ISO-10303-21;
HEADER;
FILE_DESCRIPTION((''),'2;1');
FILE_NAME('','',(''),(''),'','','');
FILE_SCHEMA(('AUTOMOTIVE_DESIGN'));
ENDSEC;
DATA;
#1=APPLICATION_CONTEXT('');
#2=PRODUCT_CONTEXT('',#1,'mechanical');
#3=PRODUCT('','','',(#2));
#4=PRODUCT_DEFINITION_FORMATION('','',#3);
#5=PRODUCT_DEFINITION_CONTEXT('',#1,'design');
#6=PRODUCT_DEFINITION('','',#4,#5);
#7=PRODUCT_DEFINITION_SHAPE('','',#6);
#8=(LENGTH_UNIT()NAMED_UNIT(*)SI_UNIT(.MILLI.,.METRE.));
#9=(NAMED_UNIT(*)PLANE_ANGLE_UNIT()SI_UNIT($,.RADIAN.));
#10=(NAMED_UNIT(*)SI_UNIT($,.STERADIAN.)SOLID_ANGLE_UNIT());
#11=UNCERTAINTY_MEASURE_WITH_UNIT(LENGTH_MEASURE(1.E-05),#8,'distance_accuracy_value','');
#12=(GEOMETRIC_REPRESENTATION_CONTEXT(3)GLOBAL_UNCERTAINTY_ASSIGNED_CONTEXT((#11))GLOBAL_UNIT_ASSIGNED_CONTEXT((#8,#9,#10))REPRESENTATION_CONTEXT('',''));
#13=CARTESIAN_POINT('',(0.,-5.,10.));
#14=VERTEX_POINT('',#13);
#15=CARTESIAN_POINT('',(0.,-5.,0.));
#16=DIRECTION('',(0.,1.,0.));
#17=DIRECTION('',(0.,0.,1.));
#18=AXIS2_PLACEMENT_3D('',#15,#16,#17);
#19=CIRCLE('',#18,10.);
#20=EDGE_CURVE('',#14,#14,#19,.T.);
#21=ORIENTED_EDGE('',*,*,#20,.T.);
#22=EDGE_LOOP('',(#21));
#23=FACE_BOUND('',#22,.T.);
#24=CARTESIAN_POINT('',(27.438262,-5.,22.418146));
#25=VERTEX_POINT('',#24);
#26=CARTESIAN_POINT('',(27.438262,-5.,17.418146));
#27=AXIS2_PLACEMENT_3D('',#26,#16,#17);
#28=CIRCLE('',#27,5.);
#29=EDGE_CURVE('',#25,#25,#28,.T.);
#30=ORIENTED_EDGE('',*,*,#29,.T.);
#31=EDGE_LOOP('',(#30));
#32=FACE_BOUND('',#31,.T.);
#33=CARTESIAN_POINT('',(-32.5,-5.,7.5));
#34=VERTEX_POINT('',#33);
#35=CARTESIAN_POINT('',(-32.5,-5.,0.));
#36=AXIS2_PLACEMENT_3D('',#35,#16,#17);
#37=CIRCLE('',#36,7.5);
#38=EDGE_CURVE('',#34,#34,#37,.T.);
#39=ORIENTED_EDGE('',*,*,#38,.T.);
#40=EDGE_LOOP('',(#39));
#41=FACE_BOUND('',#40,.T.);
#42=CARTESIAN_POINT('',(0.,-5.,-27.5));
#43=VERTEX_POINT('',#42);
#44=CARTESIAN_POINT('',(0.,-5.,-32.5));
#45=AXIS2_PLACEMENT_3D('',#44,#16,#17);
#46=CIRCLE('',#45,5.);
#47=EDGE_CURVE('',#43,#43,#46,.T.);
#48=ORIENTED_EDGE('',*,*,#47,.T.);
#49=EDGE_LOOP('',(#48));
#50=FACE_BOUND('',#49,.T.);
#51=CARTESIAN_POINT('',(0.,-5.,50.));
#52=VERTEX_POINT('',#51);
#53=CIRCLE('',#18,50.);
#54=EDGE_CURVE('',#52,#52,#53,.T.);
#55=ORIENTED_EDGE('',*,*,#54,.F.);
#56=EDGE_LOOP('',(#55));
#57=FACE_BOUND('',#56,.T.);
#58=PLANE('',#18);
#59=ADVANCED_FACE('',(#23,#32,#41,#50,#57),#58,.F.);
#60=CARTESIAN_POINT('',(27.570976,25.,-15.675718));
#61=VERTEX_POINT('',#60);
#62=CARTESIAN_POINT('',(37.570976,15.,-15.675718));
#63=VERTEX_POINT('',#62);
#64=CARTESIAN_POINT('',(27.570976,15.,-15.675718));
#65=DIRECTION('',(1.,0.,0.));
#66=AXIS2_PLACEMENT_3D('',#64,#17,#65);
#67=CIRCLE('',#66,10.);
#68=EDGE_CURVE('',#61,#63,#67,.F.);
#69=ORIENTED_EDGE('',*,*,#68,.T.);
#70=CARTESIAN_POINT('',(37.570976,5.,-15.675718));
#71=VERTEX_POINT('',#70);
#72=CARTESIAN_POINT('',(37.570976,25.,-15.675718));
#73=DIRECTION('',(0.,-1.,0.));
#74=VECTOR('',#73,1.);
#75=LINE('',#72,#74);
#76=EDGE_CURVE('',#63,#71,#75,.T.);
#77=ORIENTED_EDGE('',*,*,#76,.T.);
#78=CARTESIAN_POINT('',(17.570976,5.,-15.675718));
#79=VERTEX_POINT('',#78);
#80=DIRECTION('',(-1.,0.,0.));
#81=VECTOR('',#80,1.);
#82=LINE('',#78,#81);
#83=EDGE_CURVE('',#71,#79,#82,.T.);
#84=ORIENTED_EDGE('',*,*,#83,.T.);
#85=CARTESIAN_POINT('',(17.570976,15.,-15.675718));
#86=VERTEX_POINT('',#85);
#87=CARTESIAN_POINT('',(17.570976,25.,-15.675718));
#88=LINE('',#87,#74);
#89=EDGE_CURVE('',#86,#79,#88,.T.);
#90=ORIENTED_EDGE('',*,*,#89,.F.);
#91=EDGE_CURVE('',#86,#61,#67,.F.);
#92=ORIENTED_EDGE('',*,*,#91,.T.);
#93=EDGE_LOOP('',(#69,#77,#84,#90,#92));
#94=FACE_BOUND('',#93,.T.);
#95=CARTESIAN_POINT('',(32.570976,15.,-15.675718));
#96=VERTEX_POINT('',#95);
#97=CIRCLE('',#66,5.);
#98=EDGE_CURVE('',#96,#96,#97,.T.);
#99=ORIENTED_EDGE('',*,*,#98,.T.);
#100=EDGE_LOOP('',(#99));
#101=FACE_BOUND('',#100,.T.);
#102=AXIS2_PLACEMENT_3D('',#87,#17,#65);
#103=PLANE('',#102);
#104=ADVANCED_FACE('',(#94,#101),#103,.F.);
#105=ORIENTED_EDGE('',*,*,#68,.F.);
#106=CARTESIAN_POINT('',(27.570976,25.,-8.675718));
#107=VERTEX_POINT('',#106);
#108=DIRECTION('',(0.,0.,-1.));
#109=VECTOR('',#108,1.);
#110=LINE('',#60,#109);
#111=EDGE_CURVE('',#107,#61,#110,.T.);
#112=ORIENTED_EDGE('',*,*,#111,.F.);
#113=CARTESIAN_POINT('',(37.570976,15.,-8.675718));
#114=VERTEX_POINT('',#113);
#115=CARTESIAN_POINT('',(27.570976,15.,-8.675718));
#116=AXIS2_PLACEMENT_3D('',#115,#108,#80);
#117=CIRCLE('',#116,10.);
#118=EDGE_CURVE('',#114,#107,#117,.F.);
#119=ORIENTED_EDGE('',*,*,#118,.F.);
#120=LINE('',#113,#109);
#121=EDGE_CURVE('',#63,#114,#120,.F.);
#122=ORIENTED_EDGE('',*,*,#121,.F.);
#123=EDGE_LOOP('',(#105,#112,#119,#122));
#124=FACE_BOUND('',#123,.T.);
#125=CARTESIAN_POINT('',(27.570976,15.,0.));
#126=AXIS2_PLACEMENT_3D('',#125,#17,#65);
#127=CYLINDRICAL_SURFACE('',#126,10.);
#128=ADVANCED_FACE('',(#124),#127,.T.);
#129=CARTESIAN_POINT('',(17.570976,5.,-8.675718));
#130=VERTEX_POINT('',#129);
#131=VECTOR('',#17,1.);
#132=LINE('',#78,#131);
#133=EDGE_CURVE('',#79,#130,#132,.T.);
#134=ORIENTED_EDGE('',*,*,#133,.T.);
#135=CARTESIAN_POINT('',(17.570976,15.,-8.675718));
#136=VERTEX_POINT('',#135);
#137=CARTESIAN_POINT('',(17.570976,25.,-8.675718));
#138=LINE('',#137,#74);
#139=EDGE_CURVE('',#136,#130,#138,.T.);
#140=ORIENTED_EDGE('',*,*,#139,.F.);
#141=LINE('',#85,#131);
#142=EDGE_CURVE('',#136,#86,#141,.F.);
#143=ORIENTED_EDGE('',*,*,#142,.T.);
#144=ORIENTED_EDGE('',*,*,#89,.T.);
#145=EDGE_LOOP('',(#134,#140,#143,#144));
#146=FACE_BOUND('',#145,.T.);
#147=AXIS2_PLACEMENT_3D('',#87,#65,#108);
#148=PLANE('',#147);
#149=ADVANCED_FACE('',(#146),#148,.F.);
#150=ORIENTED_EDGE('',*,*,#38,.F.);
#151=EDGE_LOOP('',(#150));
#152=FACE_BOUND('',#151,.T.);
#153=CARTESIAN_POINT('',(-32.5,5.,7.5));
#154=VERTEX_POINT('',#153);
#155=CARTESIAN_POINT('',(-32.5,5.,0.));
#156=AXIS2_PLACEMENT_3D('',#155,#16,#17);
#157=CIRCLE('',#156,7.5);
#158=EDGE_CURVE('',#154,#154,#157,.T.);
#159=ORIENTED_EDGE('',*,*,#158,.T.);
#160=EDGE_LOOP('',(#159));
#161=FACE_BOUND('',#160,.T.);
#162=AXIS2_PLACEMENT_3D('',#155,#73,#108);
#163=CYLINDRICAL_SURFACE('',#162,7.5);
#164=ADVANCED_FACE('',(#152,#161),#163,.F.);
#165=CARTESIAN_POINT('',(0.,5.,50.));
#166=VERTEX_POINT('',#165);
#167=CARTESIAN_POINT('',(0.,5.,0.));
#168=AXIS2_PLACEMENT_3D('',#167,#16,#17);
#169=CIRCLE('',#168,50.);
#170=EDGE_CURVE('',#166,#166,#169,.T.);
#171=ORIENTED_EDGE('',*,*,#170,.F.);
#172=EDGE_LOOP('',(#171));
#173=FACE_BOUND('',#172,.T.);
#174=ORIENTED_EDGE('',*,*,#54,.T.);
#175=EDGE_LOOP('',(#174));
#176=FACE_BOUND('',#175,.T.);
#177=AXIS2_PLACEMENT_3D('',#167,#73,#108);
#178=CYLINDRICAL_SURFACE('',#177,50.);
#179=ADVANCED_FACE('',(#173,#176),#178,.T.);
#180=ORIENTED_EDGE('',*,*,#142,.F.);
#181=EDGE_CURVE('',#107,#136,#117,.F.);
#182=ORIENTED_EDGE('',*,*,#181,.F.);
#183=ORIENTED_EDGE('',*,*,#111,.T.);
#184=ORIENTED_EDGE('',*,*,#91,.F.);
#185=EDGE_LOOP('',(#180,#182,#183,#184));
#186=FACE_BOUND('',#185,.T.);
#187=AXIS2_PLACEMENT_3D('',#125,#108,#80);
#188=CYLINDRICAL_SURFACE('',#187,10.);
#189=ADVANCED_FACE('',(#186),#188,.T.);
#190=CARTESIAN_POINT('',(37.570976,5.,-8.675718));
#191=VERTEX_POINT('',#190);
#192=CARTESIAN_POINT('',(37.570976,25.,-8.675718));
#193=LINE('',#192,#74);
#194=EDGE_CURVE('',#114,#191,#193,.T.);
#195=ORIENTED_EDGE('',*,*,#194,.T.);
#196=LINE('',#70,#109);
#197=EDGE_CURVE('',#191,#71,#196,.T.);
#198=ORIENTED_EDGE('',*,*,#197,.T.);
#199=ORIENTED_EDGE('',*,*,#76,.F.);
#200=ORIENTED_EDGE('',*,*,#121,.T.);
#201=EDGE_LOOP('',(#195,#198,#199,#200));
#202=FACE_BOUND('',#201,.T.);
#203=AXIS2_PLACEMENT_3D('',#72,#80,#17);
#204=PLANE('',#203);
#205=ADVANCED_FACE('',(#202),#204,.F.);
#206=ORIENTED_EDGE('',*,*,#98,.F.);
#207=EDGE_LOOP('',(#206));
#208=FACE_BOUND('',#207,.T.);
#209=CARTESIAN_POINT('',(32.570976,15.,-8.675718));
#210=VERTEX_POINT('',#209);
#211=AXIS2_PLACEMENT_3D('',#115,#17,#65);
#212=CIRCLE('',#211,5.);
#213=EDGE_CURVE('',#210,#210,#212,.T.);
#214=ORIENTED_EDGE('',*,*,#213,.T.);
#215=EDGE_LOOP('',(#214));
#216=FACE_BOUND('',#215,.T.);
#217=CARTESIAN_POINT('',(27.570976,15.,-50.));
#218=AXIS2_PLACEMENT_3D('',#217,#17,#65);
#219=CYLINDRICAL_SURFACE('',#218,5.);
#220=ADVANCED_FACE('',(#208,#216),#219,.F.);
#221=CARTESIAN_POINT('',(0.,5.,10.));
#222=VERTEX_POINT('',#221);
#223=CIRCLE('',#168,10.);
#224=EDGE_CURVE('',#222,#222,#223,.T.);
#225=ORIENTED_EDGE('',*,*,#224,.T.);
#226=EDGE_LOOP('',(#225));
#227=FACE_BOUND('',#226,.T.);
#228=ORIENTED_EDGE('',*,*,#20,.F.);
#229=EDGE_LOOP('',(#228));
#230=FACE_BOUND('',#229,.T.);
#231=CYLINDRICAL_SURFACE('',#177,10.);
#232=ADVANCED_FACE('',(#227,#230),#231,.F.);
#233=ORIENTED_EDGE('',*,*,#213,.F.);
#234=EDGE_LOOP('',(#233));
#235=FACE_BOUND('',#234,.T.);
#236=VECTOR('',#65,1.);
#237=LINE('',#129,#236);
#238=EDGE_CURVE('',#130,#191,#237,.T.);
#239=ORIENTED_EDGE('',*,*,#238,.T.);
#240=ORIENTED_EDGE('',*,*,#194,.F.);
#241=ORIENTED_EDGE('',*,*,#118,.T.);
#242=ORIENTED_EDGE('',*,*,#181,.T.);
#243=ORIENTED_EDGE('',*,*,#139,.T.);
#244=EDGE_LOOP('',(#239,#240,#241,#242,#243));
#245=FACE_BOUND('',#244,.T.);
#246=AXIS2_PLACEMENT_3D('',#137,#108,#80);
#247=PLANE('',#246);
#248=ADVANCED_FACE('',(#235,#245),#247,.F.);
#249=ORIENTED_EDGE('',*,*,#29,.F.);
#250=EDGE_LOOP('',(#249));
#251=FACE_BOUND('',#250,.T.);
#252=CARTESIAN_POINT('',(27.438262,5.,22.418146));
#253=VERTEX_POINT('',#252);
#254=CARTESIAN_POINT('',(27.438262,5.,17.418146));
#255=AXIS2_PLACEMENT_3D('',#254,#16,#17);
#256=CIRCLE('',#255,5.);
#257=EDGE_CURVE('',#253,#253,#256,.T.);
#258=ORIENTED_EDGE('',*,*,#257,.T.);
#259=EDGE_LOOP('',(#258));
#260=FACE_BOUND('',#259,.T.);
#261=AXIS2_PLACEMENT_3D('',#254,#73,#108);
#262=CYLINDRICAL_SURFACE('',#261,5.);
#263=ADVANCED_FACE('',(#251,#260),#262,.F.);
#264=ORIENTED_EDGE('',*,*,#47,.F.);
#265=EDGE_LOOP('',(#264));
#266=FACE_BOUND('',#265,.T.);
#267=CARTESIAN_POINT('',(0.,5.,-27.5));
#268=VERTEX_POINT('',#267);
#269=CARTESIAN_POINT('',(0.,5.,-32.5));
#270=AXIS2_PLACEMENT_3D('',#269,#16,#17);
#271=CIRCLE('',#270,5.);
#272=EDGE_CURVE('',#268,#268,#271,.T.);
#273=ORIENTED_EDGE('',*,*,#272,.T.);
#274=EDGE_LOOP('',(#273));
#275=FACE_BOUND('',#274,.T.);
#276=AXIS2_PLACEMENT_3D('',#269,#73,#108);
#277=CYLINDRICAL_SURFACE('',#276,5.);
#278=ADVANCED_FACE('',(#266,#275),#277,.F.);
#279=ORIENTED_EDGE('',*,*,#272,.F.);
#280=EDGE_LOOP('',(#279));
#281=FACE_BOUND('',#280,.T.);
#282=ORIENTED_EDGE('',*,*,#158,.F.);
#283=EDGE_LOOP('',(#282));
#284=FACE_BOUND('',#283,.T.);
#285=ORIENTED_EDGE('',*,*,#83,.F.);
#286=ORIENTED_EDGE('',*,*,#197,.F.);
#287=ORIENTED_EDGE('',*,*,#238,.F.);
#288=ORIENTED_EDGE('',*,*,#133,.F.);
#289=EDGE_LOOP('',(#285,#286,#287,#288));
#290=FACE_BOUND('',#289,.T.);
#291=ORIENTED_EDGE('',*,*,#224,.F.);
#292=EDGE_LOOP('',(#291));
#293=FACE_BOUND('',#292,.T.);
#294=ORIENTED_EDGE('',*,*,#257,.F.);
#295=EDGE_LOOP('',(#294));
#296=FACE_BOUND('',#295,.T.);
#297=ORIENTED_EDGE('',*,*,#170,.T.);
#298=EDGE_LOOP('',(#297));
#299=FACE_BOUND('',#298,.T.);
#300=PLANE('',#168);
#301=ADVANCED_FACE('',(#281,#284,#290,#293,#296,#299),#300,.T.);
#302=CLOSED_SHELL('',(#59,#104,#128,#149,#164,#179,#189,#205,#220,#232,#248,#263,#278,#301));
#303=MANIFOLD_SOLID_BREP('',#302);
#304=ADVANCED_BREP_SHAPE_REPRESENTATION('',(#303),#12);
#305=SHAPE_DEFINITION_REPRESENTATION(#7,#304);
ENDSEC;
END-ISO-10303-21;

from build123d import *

# Parameters (mm, degrees)
SKETCH1_R           = 50
SKETCH1_R_2         = 5
SKETCH1_R_3         = 7.5
SKETCH1_R_4         = 10
BOSS_EXTRUDE1_DEPTH = 5
SKETCH2_W           = 20
SKETCH2_H           = 7
BOSS_EXTRUDE2_DEPTH = 20
FILLET1_R           = 10
SKETCH3_R           = 5
CUT_EXTRUDE1_DEPTH  = 82.04221019


with BuildPart() as part:
    # Sketch1 → Boss-Extrude1 (new, symmetric)
    with BuildSketch(Plane(origin=(0, 0, 0), x_dir=(1, 0, 0), z_dir=(0, 1, 0))):
        with Locations(Location((0, 0, 0), (0, 0, 270))):
            Circle(SKETCH1_R)
        with Locations(Location((27.43826166, -17.418145627, 0), (0, 0, 270))):
            Circle(SKETCH1_R_2, mode=Mode.SUBTRACT)
        with Locations(Location((-32.5, 0, 0), (0, 0, 270))):
            Circle(SKETCH1_R_3, mode=Mode.SUBTRACT)
        with Locations(Location((0, 32.5, 0), (0, 0, 270))):
            Circle(SKETCH1_R_2, mode=Mode.SUBTRACT)
        with Locations(Location((0, 0, 0), (0, 0, 270))):
            Circle(SKETCH1_R_4, mode=Mode.SUBTRACT)
    extrude(amount=BOSS_EXTRUDE1_DEPTH, both=True)

    # Sketch2 → Boss-Extrude2 (add)
    with BuildSketch(Plane(origin=(0, 5, 0), x_dir=(1, 0, 0), z_dir=(0, 1, 0))):
        with Locations((27.570975848, 12.175717572)):
            Rectangle(SKETCH2_W, SKETCH2_H)
    extrude(amount=BOSS_EXTRUDE2_DEPTH)

    # Fillet1
    fillet1_edges = [part.edges().sort_by_distance(p)[0] for p in [
        (17.570975848, 25, -12.175717572),
        (37.570975848, 25, -12.175717572),
    ]]
    fillet(fillet1_edges, radius=FILLET1_R - 0.0001)  # a hair under: the kernel refuses the full size

    # Sketch3 → Cut-Extrude1 (cut, through all)
    with BuildSketch(Plane.XY.offset(-8.675717572)):
        with Locations((27.570975848, 15)):
            Circle(SKETCH3_R)
    extrude(amount=-CUT_EXTRUDE1_DEPTH, mode=Mode.SUBTRACT)


solid = part.part
